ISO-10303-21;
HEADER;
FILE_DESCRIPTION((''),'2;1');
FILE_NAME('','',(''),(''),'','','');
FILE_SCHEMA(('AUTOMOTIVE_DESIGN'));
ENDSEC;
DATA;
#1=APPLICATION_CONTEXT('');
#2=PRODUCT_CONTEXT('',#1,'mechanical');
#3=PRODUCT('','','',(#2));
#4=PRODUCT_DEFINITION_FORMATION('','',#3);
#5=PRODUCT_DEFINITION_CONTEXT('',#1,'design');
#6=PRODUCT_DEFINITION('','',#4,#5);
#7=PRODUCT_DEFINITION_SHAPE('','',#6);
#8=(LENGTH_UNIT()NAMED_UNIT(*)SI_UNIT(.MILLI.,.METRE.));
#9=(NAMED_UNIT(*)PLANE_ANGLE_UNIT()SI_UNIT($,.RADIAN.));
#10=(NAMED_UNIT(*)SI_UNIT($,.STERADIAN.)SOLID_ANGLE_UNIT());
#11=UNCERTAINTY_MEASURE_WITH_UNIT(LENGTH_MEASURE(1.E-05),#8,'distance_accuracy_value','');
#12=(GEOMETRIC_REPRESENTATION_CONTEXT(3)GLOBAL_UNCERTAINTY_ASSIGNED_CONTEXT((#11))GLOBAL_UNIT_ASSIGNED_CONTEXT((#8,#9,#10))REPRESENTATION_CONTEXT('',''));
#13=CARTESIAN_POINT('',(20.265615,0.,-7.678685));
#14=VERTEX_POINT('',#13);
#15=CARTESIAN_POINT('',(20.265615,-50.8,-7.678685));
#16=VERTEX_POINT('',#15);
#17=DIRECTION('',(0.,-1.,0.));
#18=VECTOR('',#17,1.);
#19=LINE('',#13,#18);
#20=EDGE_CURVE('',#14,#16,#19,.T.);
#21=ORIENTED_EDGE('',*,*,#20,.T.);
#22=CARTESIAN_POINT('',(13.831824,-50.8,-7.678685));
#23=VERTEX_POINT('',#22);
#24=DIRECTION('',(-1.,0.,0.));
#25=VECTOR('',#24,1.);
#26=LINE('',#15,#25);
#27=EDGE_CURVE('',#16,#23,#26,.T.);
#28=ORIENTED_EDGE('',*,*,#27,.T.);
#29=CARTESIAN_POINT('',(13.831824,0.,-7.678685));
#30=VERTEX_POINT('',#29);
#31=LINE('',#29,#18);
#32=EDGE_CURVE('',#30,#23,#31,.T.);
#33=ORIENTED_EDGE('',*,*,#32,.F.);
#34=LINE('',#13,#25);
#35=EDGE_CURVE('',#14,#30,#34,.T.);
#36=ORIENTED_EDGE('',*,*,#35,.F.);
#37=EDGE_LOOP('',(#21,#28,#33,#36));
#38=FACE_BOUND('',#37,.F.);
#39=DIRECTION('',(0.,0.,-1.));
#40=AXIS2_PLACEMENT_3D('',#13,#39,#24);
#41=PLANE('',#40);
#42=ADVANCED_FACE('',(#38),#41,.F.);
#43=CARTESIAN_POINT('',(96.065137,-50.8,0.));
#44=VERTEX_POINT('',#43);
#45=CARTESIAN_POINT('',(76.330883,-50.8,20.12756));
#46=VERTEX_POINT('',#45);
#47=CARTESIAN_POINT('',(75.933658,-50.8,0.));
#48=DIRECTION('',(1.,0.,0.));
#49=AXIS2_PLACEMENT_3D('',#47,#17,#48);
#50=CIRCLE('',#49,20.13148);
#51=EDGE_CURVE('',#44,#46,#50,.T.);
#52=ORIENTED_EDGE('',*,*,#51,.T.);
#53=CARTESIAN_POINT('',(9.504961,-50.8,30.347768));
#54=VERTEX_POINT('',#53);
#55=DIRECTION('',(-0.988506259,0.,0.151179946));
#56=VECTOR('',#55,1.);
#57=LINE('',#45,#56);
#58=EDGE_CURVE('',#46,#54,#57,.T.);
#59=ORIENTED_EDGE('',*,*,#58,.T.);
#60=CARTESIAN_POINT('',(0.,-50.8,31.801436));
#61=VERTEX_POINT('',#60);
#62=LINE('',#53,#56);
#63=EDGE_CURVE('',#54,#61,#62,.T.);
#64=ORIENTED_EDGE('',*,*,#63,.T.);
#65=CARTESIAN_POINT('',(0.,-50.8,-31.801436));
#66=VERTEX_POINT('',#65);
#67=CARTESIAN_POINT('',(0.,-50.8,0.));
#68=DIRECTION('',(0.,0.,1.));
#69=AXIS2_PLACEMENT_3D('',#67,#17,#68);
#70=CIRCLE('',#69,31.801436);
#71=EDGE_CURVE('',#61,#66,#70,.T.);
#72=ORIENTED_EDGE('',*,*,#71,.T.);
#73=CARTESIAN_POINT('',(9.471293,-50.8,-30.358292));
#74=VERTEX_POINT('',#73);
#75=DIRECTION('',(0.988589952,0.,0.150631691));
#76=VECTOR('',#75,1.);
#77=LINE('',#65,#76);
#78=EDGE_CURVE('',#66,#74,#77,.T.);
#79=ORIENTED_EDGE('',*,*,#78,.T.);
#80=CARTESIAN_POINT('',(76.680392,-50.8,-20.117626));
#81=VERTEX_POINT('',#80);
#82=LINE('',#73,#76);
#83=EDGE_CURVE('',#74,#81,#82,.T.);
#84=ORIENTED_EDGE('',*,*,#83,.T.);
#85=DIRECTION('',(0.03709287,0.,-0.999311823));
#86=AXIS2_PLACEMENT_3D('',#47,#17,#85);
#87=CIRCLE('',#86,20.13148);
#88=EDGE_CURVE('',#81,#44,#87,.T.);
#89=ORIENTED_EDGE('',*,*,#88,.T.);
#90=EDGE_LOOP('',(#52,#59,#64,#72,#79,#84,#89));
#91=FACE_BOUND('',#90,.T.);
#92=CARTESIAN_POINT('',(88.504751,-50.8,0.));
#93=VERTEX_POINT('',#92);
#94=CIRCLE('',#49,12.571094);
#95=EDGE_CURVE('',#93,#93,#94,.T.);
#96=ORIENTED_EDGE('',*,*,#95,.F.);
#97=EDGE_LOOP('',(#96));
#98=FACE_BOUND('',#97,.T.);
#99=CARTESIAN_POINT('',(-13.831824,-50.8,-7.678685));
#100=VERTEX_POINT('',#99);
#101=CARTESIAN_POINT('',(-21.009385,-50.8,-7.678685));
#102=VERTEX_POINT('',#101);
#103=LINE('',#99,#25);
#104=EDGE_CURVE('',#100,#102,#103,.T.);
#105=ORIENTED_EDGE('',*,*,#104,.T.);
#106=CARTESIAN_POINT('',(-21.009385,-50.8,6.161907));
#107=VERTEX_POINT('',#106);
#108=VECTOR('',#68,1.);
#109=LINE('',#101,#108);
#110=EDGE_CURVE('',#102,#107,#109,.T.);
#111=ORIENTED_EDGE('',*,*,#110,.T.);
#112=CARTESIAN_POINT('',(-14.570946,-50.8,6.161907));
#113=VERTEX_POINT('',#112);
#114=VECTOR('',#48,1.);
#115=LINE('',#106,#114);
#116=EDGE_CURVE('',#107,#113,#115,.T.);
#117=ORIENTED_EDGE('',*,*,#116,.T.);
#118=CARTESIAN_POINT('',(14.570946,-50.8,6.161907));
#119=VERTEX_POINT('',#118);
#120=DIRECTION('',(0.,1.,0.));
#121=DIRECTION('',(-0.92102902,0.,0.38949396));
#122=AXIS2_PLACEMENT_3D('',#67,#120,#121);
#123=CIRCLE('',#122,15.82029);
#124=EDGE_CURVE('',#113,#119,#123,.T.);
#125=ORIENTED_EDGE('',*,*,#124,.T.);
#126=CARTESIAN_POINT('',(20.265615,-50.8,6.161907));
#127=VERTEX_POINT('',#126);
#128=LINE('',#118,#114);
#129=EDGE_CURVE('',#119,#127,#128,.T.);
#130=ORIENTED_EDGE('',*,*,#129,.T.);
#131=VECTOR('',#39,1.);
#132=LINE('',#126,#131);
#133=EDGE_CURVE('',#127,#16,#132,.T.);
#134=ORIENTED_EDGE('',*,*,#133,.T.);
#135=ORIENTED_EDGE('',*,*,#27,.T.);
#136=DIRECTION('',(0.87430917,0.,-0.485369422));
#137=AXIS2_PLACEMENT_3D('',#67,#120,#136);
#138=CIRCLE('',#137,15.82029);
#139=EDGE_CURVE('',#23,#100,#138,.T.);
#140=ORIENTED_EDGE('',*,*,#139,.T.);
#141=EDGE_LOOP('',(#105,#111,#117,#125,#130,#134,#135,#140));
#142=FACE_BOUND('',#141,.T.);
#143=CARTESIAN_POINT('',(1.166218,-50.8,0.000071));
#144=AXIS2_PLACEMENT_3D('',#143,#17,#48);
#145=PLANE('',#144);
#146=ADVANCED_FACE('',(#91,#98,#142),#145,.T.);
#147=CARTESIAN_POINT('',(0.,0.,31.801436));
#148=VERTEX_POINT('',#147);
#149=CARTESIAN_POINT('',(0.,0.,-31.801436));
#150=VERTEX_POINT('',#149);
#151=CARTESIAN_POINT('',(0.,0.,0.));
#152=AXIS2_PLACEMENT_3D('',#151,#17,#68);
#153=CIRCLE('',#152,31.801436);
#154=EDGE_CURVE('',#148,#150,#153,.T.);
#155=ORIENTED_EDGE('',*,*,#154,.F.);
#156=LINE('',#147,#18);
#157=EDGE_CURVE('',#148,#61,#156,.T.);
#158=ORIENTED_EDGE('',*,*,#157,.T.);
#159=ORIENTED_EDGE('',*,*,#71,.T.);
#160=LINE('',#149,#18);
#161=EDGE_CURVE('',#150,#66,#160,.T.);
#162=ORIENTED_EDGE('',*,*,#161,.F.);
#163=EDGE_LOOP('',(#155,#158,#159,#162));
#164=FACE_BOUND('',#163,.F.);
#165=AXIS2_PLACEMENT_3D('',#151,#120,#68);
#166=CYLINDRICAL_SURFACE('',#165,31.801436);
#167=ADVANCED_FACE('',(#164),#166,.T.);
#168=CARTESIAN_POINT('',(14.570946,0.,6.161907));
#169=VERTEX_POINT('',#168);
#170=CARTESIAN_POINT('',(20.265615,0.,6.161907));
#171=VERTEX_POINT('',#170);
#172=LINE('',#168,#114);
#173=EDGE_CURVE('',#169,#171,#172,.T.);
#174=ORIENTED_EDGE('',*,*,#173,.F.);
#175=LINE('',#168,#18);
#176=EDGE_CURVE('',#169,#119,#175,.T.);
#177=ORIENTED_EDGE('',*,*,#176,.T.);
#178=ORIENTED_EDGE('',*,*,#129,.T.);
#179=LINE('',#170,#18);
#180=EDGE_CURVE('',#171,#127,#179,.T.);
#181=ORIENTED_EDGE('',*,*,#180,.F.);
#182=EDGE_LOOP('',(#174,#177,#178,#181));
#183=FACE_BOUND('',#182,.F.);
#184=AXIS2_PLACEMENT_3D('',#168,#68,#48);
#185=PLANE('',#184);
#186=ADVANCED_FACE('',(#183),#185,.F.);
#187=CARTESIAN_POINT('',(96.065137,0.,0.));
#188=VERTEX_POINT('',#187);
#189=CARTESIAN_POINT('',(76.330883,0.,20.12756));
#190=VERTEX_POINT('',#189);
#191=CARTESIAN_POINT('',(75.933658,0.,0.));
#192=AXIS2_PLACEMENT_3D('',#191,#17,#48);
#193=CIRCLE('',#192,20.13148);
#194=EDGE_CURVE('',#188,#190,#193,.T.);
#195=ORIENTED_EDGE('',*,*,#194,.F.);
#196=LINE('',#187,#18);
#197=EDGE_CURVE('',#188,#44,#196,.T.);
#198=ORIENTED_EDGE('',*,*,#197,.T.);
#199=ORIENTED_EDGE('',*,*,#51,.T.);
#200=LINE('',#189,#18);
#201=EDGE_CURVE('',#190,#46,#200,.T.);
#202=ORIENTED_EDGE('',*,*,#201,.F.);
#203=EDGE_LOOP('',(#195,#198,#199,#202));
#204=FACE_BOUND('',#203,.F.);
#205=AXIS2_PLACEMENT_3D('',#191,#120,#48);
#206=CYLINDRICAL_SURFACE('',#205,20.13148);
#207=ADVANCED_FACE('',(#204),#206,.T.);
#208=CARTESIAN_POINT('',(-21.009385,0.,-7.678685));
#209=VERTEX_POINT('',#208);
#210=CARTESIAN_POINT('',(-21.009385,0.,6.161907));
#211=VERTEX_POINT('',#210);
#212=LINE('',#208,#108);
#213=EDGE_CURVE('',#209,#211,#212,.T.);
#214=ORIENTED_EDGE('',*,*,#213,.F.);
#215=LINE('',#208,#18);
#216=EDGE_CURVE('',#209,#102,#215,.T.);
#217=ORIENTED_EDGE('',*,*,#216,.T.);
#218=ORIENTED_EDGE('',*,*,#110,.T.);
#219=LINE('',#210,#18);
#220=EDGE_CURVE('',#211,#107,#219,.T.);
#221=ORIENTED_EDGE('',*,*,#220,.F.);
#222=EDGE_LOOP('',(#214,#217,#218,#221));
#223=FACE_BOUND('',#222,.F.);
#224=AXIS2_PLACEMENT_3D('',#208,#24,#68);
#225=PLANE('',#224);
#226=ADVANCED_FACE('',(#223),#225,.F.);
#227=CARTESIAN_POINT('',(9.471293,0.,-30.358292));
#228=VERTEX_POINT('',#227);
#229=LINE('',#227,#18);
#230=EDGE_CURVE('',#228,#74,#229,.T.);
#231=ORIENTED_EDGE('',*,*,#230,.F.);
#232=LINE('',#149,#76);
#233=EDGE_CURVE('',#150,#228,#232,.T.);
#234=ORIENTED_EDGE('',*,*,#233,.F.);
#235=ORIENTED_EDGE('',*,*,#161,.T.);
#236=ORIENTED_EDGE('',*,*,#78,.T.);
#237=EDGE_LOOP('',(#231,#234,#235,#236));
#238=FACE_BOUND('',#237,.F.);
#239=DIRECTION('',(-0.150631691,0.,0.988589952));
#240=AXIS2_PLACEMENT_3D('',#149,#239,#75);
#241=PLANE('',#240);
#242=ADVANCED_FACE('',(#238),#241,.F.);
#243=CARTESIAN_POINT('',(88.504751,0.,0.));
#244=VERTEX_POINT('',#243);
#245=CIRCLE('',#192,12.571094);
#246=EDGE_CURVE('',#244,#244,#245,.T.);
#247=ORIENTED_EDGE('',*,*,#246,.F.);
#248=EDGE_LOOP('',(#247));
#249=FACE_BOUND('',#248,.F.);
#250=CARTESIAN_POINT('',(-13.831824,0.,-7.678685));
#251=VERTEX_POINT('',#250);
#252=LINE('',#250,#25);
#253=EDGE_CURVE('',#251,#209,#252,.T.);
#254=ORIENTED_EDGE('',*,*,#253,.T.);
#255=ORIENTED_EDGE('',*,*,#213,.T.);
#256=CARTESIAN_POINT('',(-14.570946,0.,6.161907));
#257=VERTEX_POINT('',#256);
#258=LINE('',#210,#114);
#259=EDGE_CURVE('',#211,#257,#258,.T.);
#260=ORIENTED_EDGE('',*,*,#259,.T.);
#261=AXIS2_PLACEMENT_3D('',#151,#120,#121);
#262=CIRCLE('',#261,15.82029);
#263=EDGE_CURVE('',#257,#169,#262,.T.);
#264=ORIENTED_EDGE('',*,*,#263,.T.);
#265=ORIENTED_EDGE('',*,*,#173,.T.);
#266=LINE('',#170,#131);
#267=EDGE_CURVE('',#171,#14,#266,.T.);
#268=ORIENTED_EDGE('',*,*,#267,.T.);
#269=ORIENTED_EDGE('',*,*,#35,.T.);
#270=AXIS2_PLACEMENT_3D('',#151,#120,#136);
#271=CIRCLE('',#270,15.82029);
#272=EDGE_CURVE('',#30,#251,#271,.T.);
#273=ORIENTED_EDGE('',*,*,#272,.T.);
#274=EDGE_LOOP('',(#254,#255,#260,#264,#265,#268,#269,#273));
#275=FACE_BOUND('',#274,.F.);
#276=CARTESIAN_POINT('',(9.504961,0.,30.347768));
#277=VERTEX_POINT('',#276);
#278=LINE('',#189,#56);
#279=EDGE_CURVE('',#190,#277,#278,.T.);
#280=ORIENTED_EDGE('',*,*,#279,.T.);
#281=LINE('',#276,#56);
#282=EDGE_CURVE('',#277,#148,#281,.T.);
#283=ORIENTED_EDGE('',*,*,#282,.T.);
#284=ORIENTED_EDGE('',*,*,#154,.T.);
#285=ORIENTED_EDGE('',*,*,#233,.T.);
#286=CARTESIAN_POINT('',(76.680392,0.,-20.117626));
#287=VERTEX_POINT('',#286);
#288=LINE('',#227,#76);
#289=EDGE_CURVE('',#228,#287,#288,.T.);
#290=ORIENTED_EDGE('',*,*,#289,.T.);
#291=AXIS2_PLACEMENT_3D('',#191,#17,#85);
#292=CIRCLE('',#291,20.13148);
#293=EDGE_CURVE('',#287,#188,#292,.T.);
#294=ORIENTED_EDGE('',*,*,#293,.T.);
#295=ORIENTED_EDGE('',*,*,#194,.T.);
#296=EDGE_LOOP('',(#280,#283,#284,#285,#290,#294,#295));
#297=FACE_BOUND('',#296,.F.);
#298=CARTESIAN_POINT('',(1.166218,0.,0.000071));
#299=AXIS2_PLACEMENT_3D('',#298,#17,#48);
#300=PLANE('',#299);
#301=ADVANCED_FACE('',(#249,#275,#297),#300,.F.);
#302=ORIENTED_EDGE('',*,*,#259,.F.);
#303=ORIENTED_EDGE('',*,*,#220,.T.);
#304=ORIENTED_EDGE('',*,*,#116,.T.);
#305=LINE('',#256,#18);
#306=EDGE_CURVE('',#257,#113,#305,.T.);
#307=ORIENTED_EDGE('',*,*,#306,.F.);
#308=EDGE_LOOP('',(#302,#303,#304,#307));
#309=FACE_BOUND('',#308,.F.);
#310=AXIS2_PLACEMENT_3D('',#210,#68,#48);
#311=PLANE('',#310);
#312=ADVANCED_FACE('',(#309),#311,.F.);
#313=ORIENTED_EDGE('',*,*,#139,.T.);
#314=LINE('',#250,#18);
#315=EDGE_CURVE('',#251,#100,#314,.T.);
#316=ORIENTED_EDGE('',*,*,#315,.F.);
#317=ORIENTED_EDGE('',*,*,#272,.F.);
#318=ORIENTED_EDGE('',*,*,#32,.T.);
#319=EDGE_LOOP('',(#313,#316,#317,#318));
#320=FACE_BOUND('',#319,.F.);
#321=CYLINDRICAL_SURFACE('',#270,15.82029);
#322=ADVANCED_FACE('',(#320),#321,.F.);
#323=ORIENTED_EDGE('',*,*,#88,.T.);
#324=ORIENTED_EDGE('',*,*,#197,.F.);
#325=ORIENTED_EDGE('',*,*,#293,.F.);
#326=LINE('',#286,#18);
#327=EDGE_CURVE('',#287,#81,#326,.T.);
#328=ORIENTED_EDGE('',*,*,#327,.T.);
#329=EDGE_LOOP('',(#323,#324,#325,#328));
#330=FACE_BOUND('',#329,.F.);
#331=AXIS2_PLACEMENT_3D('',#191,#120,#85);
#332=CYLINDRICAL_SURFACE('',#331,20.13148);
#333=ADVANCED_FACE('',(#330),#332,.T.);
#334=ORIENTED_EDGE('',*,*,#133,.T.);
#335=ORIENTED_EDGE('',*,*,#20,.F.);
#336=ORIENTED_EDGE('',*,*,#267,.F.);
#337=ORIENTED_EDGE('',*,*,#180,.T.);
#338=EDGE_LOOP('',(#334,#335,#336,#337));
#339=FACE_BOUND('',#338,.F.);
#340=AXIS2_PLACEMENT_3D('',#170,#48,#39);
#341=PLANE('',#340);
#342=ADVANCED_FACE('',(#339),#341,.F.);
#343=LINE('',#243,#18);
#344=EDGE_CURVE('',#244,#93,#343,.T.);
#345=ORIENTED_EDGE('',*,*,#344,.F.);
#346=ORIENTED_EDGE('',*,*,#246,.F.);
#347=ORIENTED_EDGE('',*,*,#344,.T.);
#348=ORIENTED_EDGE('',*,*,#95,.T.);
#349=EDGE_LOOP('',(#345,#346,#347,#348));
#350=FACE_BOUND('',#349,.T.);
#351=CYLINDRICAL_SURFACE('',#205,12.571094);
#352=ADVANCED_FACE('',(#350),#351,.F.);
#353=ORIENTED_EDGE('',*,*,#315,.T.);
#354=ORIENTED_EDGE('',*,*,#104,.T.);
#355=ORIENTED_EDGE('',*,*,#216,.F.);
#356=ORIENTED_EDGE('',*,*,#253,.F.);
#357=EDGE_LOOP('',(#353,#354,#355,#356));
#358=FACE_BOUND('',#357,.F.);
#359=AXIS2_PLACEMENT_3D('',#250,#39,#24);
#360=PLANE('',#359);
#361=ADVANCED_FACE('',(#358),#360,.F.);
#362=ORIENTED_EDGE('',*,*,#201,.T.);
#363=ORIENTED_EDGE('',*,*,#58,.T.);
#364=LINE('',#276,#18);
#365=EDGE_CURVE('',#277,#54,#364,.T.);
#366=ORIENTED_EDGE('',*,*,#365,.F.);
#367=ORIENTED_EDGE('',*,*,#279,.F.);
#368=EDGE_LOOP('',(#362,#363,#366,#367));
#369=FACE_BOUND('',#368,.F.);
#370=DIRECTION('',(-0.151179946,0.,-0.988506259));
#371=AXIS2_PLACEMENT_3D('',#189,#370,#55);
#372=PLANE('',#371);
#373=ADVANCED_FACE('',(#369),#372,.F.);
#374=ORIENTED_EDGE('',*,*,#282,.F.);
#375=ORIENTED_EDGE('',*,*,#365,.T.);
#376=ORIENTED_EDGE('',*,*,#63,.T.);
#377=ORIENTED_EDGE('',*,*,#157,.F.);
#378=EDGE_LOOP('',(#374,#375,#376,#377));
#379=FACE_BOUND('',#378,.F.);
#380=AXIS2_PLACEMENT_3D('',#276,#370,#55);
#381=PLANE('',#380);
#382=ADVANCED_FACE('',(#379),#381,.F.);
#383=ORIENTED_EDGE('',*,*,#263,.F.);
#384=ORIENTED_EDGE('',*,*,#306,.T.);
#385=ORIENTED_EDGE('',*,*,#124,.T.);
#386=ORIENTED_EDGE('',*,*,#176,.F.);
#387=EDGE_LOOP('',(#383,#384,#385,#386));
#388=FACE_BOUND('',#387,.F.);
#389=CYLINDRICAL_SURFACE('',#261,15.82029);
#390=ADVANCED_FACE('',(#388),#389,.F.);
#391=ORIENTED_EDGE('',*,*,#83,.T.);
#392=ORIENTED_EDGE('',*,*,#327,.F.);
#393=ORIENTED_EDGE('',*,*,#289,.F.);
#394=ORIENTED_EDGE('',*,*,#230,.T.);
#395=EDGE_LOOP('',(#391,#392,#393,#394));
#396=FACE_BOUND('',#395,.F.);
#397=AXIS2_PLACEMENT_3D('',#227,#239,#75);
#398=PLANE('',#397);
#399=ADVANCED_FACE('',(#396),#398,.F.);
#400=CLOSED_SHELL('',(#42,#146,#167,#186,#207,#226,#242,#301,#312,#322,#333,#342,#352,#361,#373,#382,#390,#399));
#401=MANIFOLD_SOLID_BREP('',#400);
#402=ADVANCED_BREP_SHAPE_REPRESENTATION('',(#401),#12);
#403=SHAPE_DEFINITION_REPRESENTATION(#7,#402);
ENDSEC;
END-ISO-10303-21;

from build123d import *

# Parameters (mm, degrees)
F0_R     = 12.5710937777
F1_DEPTH = 50.8


with BuildPart() as f1:
    # F0 (on Front) → F1 (new body)
    with BuildSketch(Plane.XZ):
        with BuildLine():
            Line((9.5049608148, 30.3477681373), (0, 31.8014356752))
            ThreePointArc((0, 31.8014356752), (-31.8014356752, 0), (0, -31.8014356752))
            Line((0, -31.8014356752), (9.4712928792, -30.3582924783))
            ThreePointArc((9.4712928792, -30.3582924783), (25.6176894183, -18.8431764804), (31.8014356752, 0))
            ThreePointArc((31.8014356752, 0), (25.6281360125, 18.8289658646), (9.5049608148, 30.3477681373))
        make_face()
        with BuildLine():
            ThreePointArc((-14.5709457578, 6.1619072221), (0, 15.8202895325), (14.5709457578, 6.1619072221))
            Line((14.5709457578, 6.1619072221), (20.2656146139, 6.1619072221))
            Line((20.2656146139, 6.1619072221), (20.2656146139, -7.6786847785))
            Line((20.2656146139, -7.6786847785), (13.8318242095, -7.6786847785))
            ThreePointArc((13.8318242095, -7.6786847785), (0, -15.8202895325), (-13.8318242095, -7.6786847785))
            Line((-13.8318242095, -7.6786847785), (-21.0093853861, -7.6786847785))
            Line((-21.0093853861, -7.6786847785), (-21.0093853861, 6.1619072221))
            Line((-21.0093853861, 6.1619072221), (-14.5709457578, 6.1619072221))
        make_face(mode=Mode.SUBTRACT)
        with BuildLine():
            Line((76.3308829682, 20.1275604352), (9.5049608148, 30.3477681373))
            ThreePointArc((9.5049608148, 30.3477681373), (25.6281360125, 18.8289658646), (31.8014356752, 0))
            ThreePointArc((31.8014356752, 0), (25.6176894183, -18.8431764804), (9.4712928792, -30.3582924783))
            Line((9.4712928792, -30.3582924783), (76.6803919445, -20.1176257266))
            ThreePointArc((76.6803919445, -20.1176257266), (55.8029369519, -0.1748250718), (76.3308829682, 20.1275604352))
        make_face()
        with BuildLine():
            ThreePointArc((96.0651373404, 0), (90.3085177912, 14.0939657718), (76.3308829682, 20.1275604352))
            ThreePointArc((76.3308829682, 20.1275604352), (55.8029369519, -0.1748250718), (76.6803919445, -20.1176257266))
            ThreePointArc((76.6803919445, -20.1176257266), (90.4303700533, -13.9686006721), (96.0651373404, 0))
        make_face()
        with Locations((75.9336575866, 0)):
            Circle(F0_R, mode=Mode.SUBTRACT)
    extrude(amount=F1_DEPTH)


solid = f1.part
